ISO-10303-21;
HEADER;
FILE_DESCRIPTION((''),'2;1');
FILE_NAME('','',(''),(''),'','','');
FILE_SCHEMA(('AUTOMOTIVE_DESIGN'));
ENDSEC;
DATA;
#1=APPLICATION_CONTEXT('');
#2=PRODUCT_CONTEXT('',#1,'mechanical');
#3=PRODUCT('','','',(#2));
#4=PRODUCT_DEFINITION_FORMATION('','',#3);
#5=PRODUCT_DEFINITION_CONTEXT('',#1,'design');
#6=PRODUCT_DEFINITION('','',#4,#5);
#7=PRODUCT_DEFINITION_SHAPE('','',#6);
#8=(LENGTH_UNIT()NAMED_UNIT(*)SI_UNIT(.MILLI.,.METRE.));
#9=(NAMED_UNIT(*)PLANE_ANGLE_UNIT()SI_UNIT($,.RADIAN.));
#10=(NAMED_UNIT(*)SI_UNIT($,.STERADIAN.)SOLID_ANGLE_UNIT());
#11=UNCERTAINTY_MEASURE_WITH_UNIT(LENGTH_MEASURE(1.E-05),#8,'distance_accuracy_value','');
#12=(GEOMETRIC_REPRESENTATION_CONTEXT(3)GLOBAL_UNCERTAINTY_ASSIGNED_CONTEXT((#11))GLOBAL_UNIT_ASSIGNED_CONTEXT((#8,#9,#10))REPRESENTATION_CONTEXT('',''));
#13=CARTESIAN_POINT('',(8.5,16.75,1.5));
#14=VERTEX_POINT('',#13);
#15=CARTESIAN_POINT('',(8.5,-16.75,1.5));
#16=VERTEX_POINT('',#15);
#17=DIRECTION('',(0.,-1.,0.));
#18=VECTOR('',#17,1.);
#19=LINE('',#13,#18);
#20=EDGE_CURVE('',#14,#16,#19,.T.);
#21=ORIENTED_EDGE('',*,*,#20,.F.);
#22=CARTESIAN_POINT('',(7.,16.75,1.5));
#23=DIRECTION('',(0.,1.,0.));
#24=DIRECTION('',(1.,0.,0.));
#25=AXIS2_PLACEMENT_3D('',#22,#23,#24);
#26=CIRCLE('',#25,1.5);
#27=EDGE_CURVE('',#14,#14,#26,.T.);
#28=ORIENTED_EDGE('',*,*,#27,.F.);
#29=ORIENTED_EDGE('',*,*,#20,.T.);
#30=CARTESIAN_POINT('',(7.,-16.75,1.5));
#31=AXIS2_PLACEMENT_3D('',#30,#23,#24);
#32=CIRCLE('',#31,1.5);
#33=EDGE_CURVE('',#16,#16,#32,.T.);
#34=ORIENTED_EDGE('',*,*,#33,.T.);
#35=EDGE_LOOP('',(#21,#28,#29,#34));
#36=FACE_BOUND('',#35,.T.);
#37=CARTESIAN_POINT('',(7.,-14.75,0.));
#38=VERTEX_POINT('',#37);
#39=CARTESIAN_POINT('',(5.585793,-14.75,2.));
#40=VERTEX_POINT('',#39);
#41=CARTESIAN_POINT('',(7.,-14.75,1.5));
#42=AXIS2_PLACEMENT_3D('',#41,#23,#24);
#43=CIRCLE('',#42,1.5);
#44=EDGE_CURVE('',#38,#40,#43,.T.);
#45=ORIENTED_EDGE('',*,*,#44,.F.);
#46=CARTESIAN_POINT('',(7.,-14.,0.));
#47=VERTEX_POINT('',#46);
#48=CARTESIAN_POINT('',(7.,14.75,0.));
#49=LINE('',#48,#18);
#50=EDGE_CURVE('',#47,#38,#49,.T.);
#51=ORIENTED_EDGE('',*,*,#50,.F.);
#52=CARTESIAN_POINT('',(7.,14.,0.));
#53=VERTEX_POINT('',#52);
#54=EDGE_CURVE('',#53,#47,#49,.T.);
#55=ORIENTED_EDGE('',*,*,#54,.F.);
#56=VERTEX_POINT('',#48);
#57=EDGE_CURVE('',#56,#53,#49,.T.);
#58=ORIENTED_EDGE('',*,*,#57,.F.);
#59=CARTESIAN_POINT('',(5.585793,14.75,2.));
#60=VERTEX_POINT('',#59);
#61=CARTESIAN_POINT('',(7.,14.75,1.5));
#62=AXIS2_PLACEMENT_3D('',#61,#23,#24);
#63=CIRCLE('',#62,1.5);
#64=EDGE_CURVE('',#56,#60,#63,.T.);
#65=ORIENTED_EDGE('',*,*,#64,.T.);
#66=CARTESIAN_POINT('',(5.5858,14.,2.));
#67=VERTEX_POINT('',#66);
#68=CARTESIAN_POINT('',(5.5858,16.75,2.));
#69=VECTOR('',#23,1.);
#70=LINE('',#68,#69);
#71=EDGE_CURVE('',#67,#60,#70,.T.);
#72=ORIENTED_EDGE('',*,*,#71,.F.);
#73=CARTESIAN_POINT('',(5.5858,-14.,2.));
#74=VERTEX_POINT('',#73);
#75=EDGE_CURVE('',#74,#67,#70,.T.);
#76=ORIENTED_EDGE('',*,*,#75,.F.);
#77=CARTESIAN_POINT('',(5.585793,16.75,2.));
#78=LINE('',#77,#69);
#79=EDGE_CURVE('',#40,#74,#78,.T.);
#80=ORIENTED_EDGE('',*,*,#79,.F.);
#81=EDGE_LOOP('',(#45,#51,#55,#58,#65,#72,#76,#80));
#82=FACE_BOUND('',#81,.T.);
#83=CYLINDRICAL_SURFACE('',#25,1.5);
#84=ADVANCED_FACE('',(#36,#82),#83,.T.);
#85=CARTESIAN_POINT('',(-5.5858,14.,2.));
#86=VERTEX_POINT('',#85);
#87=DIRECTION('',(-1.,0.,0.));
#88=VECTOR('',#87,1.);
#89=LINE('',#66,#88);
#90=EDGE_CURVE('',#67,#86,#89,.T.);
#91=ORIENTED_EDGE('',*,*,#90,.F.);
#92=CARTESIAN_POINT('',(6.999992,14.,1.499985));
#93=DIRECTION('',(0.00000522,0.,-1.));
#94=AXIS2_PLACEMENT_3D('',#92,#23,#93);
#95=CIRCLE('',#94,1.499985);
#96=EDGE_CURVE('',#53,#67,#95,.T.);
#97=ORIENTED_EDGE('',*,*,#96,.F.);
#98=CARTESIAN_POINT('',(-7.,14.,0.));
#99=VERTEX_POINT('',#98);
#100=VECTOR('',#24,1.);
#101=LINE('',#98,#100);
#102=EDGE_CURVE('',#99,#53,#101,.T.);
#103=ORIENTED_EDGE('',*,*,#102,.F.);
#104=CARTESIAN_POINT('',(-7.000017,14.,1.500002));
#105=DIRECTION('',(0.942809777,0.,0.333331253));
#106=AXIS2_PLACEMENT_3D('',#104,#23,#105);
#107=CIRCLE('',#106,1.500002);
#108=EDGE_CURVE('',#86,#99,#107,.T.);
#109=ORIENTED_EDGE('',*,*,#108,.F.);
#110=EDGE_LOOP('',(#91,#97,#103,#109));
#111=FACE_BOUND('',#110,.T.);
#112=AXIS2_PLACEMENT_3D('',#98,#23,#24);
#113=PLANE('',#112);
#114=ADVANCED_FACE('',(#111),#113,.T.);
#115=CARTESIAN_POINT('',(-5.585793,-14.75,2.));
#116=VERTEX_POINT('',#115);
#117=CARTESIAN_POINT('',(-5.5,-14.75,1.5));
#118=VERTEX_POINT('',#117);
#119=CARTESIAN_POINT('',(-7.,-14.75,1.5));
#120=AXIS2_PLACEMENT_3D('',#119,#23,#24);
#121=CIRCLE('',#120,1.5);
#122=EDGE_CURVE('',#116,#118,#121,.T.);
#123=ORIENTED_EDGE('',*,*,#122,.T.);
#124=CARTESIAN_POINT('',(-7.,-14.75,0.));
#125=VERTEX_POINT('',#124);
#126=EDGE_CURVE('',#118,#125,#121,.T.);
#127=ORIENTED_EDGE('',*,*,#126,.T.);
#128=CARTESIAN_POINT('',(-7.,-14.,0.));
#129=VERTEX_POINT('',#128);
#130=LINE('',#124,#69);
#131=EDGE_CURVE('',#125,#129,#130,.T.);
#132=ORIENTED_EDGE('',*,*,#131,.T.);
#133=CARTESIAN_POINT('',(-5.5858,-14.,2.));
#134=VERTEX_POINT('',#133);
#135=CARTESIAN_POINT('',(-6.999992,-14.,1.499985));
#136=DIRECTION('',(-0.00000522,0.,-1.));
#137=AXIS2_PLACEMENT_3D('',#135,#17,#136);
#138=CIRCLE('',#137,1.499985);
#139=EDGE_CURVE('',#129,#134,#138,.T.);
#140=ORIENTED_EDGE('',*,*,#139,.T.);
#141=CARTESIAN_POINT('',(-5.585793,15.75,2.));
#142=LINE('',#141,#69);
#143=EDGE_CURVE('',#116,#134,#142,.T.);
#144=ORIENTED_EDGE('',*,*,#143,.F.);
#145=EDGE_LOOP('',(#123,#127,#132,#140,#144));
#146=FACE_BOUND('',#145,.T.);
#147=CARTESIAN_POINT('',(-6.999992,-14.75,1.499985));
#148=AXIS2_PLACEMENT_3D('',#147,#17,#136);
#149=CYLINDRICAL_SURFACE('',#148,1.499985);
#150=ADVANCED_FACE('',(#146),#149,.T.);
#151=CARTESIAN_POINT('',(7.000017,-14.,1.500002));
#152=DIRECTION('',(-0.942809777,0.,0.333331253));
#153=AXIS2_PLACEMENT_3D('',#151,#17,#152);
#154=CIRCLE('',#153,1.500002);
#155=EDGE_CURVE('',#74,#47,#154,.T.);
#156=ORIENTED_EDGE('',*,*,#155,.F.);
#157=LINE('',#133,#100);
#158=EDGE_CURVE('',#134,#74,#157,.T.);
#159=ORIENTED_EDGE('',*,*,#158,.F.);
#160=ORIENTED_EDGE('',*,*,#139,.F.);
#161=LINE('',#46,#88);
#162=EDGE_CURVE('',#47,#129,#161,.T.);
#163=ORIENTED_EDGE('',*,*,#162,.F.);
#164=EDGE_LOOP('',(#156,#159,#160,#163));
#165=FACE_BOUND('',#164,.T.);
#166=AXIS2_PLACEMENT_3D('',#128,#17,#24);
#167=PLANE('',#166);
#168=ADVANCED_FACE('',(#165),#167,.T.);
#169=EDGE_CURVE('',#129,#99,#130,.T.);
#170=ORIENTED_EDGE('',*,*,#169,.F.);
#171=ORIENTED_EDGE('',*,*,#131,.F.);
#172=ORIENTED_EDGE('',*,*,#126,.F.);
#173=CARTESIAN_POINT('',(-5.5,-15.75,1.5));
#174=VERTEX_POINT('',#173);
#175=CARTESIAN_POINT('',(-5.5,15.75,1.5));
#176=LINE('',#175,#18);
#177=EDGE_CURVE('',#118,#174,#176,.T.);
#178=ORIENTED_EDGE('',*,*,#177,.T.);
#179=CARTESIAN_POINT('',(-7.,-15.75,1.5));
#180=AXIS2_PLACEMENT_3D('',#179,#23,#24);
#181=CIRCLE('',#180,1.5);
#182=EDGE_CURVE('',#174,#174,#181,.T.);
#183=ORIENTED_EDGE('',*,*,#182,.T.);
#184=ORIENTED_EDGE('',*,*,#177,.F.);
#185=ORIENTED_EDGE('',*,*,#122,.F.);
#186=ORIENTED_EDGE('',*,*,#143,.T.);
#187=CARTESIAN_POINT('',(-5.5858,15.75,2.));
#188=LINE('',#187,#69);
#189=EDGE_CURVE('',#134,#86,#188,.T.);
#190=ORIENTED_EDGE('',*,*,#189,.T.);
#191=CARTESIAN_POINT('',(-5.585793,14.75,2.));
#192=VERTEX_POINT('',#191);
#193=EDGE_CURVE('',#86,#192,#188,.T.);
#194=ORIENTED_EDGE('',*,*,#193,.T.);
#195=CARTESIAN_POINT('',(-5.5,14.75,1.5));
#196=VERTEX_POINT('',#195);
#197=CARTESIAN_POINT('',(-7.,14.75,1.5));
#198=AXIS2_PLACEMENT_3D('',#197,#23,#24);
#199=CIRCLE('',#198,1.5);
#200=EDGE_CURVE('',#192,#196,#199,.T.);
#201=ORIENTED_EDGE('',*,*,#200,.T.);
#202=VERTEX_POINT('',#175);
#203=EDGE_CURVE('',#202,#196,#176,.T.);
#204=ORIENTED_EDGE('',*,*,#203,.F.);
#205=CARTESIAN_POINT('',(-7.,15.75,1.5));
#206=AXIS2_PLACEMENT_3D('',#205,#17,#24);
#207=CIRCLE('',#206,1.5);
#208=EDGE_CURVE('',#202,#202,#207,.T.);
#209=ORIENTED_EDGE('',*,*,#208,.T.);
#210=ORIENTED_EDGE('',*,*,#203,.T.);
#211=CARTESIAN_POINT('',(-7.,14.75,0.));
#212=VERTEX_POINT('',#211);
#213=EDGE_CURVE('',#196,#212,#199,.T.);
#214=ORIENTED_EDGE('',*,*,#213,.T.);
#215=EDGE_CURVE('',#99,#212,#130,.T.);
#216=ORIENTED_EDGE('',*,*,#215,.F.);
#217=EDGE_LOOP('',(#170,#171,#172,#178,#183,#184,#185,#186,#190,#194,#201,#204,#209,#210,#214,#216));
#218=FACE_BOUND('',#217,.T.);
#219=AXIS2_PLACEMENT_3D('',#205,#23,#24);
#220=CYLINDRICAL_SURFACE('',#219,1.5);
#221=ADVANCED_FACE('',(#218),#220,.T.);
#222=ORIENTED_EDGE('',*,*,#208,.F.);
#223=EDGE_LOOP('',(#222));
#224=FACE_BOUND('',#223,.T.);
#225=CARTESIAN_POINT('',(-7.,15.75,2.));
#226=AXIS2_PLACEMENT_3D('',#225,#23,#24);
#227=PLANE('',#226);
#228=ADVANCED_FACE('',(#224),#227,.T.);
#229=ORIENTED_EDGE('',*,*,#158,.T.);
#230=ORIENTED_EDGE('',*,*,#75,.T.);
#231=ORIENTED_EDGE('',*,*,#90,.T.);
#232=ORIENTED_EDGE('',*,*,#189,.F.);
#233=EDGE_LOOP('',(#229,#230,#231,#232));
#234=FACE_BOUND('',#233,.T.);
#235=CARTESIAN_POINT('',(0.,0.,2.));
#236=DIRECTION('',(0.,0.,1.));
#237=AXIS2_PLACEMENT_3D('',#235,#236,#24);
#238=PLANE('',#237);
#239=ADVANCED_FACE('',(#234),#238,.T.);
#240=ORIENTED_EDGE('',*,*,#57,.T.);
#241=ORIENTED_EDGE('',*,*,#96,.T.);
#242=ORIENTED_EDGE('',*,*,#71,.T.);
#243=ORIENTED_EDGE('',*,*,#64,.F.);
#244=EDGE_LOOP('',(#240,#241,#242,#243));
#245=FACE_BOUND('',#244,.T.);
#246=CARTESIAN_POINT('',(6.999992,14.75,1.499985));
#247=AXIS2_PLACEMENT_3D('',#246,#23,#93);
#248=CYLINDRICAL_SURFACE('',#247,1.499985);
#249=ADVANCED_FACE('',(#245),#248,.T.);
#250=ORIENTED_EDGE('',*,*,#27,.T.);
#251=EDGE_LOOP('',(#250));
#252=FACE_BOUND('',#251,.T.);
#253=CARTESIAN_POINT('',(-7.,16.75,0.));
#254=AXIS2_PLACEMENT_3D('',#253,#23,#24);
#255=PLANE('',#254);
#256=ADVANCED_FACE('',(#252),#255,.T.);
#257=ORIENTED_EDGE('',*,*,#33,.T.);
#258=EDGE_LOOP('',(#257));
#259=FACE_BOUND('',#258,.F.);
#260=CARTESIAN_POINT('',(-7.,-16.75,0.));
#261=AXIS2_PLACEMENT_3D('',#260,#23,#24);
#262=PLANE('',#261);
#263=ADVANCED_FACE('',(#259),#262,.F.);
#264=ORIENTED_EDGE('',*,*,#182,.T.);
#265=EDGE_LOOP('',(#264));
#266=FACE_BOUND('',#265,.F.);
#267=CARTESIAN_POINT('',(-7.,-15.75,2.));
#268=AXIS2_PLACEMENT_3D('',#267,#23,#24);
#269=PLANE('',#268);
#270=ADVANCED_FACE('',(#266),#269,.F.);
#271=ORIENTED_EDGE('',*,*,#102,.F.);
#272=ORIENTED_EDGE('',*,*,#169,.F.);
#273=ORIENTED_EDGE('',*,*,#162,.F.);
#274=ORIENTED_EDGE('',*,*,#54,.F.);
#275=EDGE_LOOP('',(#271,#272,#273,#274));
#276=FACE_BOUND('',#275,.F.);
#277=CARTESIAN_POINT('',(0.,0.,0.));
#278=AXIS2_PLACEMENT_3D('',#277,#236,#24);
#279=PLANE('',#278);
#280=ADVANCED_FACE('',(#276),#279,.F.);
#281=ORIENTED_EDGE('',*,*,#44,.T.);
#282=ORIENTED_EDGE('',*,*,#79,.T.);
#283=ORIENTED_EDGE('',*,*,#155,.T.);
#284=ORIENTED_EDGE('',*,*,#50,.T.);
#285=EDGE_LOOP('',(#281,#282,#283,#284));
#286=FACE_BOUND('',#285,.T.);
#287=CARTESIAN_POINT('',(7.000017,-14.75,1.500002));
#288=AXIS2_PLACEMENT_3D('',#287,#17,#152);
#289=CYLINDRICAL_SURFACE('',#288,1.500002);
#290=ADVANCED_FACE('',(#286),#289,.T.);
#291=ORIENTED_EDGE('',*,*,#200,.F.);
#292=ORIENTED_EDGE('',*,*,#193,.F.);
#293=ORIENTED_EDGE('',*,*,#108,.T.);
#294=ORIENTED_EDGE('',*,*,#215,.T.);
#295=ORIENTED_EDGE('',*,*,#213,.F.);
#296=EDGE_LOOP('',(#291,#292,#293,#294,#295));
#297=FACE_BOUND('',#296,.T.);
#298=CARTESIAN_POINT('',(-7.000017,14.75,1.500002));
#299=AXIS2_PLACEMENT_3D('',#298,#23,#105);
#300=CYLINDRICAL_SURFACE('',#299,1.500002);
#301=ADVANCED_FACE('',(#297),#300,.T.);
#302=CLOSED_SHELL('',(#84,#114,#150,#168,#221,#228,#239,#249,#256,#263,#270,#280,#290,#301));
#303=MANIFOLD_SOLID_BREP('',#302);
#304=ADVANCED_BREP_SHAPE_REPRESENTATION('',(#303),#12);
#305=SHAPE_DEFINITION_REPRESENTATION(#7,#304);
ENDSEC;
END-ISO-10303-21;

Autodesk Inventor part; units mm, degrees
ref_plane "YZ Plane" through (0, 0, 0) normal (1, 0, 0) x (0, 1, 0)
sketch "Sketch1" plane through (0, 0, 0) normal (0, 0, 1) x (1, 0, 0)
  line L0 (-9.8, 0) -> (9.8, 0) construction
  line L1 (0, -20.65) -> (0, 20.65) construction
  line L2 (7, -14.75) -> (-7, -14.75)
  line L3 (-7, -14.75) -> (-7, 14.75)
  line L4 (-7, 14.75) -> (7, 14.75)
  line L5 (7, 14.75) -> (7, -14.75)
  line L6 (7, -14.75) -> (-7, 14.75) construction
  line L7 (-7, -14.75) -> (7, 14.75) construction
  point P0 (0, 0)
  dimension "d0" = 14
  dimension "d1" = 29.5
extrude "Extrusion1" add sketch "Sketch1" along normal blind 2
ref_plane "Work Plane1" through (-7, 16.75, 0) normal (0, 1, 0) x (1, 0, 0)
sketch "Sketch2" plane through (-7, 16.75, 0) normal (0, 1, 0) x (1, 0, 0)
  line L0 (0, 0) -> (14, 0) construction
  line L1 (0, 0) -> (0, -2) construction
  line L2 (14, -2) -> (0, -2) construction
  line L3 (14, 0) -> (14, -2) construction
  circle A0 centre (14, -1.5) radius 1.5
  point P0 (7, 0)
  dimension "d5" = 3
extrude "Extrusion2" add sketch "Sketch2" against normal blind 33.5
ref_plane "Work Plane2" through (-7, 15.75, 2) normal (0, 1, 0) x (1, 0, 0)
sketch "Sketch3" plane through (-7, 15.75, 2) normal (0, 1, 0) x (1, 0, 0)
  arc A0 (14, 2) -> (12.5858, 0) centre (14, 0.5) ccw construction
  line L0 (0, 2) -> (14, 2) construction
  line L1 (0, 2) -> (0, 0) construction
  line L2 (12.5858, 0) -> (0, 0) construction
  line L3 (0, 2) -> (0, 0) projected
  circle A1 centre (0, 0.5) radius 1.5
  point P0 (7, 2)
  dimension "d9" = 3
extrude "Extrusion3" add sketch "Sketch3" against normal blind 31.5
sketch "Skizze5" plane through (-7, 14.75, 0) normal (0, 1, 0) x (1, 0, 0)
  arc A0 (1.4142, -2) -> (0, 0) centre (0, -1.5) ccw projected
  line L0 (12.5858, -2) -> (1.4142, -2) projected
  arc A1 (14, 0) -> (12.5858, -2) centre (14, -1.5) ccw projected
  line L1 (0, 0) -> (14, 0) projected
  point P0 (7, 0)
extrude "Extrusion4" cut sketch "Skizze5" against normal blind 0.75
sketch "Skizze6" plane through (-7, -14.75, 0) normal (0, -1, 0) x (1, 0, 0)
  arc A0 (0, 0) -> (1.4142, 2) centre (0, 1.5) ccw projected
  line L0 (14, 0) -> (0, 0) projected
  arc A1 (12.5858, 2) -> (14, 0) centre (14, 1.5) ccw projected
  line L1 (1.4142, 2) -> (12.5858, 2) projected
  point P0 (7, 0)
extrude "Extrusion5" cut sketch "Skizze6" against normal blind 0.75
equation "\"d6\" = d1 + 2 * d4"
equation "\"d4\" = 2"
properties part number "20_Rect_Aperture_door_slide"
